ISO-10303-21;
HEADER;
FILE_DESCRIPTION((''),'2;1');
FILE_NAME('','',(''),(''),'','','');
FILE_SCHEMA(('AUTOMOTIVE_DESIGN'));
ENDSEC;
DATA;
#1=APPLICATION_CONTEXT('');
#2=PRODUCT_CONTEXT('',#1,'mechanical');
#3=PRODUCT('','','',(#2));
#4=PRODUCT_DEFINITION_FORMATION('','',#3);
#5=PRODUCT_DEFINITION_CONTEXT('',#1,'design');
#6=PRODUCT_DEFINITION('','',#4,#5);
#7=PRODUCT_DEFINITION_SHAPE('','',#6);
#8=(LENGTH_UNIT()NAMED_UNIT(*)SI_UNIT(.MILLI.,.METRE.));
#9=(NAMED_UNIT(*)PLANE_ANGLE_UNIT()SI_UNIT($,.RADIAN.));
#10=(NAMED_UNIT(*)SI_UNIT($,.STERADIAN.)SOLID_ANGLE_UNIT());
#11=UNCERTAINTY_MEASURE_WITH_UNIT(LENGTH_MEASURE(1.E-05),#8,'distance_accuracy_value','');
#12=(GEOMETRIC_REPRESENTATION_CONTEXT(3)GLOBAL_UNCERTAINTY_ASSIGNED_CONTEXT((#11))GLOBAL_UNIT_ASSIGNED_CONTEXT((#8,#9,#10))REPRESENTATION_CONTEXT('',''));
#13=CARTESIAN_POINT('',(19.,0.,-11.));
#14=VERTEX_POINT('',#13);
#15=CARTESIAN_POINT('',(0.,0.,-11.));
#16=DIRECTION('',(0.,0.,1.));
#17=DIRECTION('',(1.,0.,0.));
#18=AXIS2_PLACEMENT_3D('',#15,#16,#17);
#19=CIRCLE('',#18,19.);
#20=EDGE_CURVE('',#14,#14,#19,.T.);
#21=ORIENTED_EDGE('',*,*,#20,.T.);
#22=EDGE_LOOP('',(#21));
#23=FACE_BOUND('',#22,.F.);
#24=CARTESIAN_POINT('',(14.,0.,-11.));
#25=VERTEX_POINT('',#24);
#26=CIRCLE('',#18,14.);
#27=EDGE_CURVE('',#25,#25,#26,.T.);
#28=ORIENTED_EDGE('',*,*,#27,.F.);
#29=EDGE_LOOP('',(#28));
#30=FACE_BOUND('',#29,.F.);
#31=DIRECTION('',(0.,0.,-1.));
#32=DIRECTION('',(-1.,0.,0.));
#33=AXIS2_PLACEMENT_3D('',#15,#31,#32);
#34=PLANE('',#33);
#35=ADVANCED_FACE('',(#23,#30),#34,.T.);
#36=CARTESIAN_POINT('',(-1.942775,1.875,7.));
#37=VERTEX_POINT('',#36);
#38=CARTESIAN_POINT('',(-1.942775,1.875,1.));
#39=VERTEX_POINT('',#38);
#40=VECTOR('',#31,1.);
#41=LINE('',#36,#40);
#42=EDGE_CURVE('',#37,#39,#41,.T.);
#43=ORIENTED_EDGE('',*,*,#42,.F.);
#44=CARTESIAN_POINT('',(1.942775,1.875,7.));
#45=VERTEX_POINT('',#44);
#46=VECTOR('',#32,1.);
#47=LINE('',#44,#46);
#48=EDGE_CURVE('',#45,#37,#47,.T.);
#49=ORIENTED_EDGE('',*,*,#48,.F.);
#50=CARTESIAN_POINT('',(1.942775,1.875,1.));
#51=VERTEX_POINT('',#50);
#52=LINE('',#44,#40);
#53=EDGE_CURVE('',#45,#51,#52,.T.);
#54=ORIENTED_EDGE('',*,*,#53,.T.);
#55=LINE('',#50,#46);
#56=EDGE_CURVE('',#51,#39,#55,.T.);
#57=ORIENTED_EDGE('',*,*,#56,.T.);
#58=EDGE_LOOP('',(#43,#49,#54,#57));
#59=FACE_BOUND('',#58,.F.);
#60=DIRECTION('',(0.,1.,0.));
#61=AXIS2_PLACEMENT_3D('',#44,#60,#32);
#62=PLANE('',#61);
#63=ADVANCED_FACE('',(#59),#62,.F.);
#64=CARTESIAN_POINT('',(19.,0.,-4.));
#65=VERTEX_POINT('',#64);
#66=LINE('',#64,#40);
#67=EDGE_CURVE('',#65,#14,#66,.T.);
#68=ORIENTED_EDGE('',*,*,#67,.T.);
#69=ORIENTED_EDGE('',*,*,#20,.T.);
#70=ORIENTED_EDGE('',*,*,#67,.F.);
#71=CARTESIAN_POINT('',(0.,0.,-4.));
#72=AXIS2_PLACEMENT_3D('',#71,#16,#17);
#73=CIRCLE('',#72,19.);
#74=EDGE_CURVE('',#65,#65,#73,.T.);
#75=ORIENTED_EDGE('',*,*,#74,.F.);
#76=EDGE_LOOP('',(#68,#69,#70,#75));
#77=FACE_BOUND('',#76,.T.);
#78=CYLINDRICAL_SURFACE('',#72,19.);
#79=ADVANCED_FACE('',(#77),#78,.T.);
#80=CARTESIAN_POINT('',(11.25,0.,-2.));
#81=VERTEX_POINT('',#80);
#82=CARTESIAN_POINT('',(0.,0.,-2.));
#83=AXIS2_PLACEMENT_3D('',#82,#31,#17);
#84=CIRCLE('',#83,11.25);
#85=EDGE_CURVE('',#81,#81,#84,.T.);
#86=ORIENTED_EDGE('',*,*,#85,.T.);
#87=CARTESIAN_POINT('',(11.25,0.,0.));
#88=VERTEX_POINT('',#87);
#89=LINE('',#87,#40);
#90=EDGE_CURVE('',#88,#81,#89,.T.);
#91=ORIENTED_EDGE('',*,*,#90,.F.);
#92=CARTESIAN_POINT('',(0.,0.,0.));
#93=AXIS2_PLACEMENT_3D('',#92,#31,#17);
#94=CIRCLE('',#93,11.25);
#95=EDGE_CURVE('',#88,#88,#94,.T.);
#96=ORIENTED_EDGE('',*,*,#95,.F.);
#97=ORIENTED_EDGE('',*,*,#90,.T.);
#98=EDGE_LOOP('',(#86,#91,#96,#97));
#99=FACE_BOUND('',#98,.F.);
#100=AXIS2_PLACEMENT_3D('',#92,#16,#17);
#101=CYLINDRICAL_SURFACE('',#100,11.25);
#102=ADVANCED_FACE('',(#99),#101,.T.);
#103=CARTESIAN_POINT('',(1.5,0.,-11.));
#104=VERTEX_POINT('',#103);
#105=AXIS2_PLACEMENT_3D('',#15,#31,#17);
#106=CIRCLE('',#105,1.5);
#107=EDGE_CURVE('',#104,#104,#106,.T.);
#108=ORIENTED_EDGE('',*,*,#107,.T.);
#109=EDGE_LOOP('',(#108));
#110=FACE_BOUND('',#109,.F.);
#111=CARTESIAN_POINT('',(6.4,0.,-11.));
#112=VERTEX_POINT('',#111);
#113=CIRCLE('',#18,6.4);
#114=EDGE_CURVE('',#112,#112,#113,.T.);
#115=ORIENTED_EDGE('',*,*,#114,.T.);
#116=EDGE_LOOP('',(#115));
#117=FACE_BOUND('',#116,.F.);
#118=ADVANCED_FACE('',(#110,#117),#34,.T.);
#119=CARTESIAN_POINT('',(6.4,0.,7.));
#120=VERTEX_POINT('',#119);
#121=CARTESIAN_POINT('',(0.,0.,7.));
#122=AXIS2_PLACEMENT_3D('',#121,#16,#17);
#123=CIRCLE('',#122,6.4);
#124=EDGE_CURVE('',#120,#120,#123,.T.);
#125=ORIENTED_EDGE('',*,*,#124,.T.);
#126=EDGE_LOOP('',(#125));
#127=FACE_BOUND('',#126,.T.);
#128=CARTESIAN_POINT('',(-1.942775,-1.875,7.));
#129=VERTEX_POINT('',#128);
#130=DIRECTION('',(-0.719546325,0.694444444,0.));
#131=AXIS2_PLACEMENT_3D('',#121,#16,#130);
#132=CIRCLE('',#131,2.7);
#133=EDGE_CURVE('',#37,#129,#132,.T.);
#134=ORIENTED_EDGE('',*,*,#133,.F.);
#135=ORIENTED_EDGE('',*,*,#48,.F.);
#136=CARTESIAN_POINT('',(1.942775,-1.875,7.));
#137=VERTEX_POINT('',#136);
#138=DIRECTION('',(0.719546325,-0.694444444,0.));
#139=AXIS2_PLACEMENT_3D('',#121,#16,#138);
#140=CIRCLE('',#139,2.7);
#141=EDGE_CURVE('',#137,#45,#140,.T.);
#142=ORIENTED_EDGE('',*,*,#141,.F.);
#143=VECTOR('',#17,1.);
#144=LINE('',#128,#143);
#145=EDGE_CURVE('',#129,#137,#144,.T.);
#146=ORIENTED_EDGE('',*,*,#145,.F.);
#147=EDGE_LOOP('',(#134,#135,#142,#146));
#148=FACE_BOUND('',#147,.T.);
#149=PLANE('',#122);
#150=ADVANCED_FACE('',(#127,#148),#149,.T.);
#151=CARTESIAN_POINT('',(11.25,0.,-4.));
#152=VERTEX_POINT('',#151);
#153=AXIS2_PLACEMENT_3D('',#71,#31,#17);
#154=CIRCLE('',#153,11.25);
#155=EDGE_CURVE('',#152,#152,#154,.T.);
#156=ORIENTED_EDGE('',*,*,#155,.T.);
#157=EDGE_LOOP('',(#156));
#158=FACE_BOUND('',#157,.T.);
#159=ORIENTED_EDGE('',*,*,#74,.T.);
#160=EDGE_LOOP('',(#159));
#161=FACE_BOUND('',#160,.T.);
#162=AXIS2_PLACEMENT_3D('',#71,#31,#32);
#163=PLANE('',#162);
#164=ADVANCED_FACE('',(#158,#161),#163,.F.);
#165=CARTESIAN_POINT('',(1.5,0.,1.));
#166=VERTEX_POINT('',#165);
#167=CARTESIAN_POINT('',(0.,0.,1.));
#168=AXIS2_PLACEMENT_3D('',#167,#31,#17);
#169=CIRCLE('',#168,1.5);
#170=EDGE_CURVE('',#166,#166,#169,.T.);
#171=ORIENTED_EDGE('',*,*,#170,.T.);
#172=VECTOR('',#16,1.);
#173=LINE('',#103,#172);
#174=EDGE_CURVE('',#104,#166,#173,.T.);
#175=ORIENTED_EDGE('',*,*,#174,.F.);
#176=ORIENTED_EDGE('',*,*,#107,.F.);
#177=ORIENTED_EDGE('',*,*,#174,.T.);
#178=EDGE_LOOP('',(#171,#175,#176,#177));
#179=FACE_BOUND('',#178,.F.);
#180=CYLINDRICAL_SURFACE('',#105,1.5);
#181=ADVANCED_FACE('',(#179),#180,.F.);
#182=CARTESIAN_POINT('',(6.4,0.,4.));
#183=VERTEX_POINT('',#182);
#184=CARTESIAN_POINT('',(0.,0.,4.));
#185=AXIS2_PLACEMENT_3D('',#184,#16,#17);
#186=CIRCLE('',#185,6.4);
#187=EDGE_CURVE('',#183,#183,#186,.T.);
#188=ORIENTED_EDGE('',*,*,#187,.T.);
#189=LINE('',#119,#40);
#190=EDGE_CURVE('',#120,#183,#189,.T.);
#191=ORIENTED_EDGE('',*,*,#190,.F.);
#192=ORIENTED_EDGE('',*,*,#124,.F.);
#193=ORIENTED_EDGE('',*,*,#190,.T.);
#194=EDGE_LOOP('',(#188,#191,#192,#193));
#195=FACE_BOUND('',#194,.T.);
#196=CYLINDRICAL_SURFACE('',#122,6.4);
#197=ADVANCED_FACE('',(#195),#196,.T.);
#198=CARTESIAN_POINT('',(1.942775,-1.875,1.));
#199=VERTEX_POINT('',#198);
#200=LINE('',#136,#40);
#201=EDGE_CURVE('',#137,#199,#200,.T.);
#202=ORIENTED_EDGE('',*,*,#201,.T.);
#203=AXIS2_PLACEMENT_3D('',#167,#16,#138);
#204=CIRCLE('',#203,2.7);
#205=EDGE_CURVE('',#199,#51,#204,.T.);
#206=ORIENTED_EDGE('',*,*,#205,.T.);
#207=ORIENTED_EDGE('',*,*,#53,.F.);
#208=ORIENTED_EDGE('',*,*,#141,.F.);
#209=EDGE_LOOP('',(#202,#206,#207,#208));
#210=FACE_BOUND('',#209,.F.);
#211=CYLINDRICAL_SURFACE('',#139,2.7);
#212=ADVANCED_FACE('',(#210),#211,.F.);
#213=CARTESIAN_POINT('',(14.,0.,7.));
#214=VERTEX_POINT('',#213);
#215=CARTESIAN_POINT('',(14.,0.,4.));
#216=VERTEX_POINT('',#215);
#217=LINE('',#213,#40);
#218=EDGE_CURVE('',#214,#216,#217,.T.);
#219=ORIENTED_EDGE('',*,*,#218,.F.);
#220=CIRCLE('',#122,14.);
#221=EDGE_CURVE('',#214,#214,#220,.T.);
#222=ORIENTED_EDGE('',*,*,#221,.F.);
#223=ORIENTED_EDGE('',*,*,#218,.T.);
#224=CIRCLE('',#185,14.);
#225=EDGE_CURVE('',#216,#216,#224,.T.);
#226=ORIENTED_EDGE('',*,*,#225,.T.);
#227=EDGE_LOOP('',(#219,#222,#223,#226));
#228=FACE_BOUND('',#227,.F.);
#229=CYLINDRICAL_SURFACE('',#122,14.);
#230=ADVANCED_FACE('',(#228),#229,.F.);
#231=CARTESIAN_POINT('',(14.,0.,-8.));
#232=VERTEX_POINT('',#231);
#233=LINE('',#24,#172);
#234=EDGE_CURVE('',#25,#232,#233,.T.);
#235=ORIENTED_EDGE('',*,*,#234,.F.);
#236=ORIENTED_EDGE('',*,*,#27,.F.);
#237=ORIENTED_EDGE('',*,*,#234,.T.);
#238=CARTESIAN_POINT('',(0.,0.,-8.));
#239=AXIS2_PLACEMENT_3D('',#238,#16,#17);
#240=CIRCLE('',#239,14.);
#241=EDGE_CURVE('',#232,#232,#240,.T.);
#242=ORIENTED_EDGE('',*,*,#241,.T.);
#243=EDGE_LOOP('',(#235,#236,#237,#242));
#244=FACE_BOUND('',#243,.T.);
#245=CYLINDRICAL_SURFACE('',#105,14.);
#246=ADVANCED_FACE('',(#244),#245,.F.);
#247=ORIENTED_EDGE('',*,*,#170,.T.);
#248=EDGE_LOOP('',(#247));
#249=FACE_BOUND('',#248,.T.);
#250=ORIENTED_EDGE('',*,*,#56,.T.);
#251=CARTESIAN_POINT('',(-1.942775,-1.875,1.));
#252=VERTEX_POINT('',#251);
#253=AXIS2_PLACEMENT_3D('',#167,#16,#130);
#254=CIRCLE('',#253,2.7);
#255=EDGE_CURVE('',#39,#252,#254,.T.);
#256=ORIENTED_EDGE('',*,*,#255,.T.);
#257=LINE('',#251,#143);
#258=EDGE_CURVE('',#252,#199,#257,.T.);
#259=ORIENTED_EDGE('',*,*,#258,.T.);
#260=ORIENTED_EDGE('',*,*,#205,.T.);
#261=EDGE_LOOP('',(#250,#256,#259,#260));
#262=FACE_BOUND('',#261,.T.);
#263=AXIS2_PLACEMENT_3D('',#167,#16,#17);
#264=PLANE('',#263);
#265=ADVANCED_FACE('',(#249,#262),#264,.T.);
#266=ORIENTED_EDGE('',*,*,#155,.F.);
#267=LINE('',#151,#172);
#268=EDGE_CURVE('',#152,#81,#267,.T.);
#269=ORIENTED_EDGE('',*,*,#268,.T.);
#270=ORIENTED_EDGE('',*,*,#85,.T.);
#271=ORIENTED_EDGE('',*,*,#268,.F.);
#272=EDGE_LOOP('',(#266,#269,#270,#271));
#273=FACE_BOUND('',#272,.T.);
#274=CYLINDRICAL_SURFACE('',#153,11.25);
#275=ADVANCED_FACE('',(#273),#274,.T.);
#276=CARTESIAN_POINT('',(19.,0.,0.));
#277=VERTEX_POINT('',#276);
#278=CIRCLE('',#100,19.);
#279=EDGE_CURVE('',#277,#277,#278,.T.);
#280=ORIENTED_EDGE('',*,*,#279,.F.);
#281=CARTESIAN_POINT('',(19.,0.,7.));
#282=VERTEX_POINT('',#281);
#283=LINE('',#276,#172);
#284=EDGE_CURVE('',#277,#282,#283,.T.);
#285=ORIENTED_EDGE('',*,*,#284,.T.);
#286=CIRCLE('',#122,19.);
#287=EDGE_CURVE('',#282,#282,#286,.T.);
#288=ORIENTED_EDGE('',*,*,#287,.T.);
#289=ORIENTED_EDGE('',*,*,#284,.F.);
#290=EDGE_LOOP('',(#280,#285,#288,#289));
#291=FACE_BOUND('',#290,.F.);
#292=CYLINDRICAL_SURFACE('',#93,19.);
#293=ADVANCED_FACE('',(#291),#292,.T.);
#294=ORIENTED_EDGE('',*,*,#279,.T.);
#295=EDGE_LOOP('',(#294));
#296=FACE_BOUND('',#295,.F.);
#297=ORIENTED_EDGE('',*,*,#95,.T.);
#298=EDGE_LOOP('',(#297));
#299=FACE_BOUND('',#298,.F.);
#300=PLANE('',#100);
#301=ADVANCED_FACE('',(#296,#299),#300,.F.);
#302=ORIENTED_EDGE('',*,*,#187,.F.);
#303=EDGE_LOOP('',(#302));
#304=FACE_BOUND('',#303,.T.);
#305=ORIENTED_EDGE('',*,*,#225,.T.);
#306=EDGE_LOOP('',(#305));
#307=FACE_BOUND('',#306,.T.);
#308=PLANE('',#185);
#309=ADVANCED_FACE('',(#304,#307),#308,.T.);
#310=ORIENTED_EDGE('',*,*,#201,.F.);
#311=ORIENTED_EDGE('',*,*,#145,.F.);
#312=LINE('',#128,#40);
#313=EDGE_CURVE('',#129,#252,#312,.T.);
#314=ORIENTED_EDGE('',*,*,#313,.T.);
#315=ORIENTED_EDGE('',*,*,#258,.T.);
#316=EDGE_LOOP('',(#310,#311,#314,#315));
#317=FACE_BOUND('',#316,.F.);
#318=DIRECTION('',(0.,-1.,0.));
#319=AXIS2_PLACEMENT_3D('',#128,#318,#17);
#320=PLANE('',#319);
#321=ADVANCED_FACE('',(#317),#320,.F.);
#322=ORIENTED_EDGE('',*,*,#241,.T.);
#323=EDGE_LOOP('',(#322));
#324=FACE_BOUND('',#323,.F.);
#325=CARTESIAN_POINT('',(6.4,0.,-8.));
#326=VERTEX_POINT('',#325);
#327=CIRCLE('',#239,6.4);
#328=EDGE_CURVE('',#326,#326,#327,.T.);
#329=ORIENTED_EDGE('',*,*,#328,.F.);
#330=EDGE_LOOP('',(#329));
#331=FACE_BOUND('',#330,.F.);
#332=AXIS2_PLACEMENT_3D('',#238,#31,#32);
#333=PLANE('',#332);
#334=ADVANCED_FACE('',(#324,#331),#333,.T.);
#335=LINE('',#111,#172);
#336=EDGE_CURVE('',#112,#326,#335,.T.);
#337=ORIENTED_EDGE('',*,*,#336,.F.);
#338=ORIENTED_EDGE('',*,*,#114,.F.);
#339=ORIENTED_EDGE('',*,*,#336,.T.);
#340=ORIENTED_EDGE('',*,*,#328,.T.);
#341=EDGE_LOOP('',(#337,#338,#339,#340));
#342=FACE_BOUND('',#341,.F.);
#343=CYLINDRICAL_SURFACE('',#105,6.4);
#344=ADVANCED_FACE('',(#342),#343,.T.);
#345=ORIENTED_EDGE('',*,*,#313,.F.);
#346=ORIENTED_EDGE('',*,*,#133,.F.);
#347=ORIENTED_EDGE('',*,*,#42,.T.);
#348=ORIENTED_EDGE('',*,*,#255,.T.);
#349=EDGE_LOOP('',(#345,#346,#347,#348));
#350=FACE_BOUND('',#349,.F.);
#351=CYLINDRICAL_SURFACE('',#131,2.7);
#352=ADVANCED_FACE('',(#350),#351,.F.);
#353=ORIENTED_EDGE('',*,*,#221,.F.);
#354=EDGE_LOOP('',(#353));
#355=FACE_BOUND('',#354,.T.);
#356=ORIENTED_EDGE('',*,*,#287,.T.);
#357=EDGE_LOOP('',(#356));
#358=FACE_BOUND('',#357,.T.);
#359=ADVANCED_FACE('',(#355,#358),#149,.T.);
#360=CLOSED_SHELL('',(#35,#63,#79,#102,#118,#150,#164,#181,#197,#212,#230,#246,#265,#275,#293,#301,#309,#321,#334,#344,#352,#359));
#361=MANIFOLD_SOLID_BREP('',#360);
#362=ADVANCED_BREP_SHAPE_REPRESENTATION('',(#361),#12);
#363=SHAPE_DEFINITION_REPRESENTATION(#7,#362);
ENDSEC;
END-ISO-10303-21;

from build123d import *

# Parameters (mm, degrees)
F0_R      = 19
F1_DEPTH  = 7
F2_R      = 11.25
F3_DEPTH  = 2
F4_R      = 14
F4_R_2    = 6.4
F5_DEPTH  = 3
F8_DEPTH  = 6
F9_R      = 1.5
F10_DEPTH = 12


# Not quite as in the source:
# - a feature names something its author has since deleted; it is built from what else it names


with BuildPart() as f1:
    # F0 (on Top) → F1 (new body)
    with BuildSketch(Plane.XY):
        Circle(F0_R)
    extrude(amount=F1_DEPTH)

    # F2 (on face) → F3 (join)
    with BuildSketch(Plane(origin=(0, 0, 0), x_dir=(1, 0, 0), z_dir=(0, 0, -1))):
        Circle(F2_R)
    extrude(amount=F3_DEPTH)

    # F4 (on face) → F5 (cut)
    with BuildSketch(Plane.XY.offset(7)):
        Circle(F4_R)
        Circle(F4_R_2, mode=Mode.SUBTRACT)
    extrude(amount=-F5_DEPTH, mode=Mode.SUBTRACT)

    # F6: F1 across face


with BuildPart() as f1_1:
    add(f1.part)
    add(f1.part.mirror(Plane(origin=(0, 0, -2), x_dir=(1, 0, 0), z_dir=(0, 0, -1))))

    # F7 (on face) → F8 (cut)
    with BuildSketch(Plane.XY.offset(7)):
        with BuildLine():
            Line((1.942775077, 1.875), (-1.942775077, 1.875))
            ThreePointArc((-1.942775077, 1.875), (-2.7, 0), (-1.942775077, -1.875))
            Line((-1.942775077, -1.875), (1.942775077, -1.875))
            ThreePointArc((1.942775077, -1.875), (2.7, 0), (1.942775077, 1.875))
        make_face()
    extrude(amount=-F8_DEPTH, mode=Mode.SUBTRACT)

    # F9 (on face) → F10 (cut, through all)
    with BuildSketch(Plane(origin=(0, 0, -11), x_dir=(1, 0, 0), z_dir=(0, 0, -1))):
        Circle(F9_R)
    extrude(amount=-F10_DEPTH, mode=Mode.SUBTRACT)


solid = f1_1.part
